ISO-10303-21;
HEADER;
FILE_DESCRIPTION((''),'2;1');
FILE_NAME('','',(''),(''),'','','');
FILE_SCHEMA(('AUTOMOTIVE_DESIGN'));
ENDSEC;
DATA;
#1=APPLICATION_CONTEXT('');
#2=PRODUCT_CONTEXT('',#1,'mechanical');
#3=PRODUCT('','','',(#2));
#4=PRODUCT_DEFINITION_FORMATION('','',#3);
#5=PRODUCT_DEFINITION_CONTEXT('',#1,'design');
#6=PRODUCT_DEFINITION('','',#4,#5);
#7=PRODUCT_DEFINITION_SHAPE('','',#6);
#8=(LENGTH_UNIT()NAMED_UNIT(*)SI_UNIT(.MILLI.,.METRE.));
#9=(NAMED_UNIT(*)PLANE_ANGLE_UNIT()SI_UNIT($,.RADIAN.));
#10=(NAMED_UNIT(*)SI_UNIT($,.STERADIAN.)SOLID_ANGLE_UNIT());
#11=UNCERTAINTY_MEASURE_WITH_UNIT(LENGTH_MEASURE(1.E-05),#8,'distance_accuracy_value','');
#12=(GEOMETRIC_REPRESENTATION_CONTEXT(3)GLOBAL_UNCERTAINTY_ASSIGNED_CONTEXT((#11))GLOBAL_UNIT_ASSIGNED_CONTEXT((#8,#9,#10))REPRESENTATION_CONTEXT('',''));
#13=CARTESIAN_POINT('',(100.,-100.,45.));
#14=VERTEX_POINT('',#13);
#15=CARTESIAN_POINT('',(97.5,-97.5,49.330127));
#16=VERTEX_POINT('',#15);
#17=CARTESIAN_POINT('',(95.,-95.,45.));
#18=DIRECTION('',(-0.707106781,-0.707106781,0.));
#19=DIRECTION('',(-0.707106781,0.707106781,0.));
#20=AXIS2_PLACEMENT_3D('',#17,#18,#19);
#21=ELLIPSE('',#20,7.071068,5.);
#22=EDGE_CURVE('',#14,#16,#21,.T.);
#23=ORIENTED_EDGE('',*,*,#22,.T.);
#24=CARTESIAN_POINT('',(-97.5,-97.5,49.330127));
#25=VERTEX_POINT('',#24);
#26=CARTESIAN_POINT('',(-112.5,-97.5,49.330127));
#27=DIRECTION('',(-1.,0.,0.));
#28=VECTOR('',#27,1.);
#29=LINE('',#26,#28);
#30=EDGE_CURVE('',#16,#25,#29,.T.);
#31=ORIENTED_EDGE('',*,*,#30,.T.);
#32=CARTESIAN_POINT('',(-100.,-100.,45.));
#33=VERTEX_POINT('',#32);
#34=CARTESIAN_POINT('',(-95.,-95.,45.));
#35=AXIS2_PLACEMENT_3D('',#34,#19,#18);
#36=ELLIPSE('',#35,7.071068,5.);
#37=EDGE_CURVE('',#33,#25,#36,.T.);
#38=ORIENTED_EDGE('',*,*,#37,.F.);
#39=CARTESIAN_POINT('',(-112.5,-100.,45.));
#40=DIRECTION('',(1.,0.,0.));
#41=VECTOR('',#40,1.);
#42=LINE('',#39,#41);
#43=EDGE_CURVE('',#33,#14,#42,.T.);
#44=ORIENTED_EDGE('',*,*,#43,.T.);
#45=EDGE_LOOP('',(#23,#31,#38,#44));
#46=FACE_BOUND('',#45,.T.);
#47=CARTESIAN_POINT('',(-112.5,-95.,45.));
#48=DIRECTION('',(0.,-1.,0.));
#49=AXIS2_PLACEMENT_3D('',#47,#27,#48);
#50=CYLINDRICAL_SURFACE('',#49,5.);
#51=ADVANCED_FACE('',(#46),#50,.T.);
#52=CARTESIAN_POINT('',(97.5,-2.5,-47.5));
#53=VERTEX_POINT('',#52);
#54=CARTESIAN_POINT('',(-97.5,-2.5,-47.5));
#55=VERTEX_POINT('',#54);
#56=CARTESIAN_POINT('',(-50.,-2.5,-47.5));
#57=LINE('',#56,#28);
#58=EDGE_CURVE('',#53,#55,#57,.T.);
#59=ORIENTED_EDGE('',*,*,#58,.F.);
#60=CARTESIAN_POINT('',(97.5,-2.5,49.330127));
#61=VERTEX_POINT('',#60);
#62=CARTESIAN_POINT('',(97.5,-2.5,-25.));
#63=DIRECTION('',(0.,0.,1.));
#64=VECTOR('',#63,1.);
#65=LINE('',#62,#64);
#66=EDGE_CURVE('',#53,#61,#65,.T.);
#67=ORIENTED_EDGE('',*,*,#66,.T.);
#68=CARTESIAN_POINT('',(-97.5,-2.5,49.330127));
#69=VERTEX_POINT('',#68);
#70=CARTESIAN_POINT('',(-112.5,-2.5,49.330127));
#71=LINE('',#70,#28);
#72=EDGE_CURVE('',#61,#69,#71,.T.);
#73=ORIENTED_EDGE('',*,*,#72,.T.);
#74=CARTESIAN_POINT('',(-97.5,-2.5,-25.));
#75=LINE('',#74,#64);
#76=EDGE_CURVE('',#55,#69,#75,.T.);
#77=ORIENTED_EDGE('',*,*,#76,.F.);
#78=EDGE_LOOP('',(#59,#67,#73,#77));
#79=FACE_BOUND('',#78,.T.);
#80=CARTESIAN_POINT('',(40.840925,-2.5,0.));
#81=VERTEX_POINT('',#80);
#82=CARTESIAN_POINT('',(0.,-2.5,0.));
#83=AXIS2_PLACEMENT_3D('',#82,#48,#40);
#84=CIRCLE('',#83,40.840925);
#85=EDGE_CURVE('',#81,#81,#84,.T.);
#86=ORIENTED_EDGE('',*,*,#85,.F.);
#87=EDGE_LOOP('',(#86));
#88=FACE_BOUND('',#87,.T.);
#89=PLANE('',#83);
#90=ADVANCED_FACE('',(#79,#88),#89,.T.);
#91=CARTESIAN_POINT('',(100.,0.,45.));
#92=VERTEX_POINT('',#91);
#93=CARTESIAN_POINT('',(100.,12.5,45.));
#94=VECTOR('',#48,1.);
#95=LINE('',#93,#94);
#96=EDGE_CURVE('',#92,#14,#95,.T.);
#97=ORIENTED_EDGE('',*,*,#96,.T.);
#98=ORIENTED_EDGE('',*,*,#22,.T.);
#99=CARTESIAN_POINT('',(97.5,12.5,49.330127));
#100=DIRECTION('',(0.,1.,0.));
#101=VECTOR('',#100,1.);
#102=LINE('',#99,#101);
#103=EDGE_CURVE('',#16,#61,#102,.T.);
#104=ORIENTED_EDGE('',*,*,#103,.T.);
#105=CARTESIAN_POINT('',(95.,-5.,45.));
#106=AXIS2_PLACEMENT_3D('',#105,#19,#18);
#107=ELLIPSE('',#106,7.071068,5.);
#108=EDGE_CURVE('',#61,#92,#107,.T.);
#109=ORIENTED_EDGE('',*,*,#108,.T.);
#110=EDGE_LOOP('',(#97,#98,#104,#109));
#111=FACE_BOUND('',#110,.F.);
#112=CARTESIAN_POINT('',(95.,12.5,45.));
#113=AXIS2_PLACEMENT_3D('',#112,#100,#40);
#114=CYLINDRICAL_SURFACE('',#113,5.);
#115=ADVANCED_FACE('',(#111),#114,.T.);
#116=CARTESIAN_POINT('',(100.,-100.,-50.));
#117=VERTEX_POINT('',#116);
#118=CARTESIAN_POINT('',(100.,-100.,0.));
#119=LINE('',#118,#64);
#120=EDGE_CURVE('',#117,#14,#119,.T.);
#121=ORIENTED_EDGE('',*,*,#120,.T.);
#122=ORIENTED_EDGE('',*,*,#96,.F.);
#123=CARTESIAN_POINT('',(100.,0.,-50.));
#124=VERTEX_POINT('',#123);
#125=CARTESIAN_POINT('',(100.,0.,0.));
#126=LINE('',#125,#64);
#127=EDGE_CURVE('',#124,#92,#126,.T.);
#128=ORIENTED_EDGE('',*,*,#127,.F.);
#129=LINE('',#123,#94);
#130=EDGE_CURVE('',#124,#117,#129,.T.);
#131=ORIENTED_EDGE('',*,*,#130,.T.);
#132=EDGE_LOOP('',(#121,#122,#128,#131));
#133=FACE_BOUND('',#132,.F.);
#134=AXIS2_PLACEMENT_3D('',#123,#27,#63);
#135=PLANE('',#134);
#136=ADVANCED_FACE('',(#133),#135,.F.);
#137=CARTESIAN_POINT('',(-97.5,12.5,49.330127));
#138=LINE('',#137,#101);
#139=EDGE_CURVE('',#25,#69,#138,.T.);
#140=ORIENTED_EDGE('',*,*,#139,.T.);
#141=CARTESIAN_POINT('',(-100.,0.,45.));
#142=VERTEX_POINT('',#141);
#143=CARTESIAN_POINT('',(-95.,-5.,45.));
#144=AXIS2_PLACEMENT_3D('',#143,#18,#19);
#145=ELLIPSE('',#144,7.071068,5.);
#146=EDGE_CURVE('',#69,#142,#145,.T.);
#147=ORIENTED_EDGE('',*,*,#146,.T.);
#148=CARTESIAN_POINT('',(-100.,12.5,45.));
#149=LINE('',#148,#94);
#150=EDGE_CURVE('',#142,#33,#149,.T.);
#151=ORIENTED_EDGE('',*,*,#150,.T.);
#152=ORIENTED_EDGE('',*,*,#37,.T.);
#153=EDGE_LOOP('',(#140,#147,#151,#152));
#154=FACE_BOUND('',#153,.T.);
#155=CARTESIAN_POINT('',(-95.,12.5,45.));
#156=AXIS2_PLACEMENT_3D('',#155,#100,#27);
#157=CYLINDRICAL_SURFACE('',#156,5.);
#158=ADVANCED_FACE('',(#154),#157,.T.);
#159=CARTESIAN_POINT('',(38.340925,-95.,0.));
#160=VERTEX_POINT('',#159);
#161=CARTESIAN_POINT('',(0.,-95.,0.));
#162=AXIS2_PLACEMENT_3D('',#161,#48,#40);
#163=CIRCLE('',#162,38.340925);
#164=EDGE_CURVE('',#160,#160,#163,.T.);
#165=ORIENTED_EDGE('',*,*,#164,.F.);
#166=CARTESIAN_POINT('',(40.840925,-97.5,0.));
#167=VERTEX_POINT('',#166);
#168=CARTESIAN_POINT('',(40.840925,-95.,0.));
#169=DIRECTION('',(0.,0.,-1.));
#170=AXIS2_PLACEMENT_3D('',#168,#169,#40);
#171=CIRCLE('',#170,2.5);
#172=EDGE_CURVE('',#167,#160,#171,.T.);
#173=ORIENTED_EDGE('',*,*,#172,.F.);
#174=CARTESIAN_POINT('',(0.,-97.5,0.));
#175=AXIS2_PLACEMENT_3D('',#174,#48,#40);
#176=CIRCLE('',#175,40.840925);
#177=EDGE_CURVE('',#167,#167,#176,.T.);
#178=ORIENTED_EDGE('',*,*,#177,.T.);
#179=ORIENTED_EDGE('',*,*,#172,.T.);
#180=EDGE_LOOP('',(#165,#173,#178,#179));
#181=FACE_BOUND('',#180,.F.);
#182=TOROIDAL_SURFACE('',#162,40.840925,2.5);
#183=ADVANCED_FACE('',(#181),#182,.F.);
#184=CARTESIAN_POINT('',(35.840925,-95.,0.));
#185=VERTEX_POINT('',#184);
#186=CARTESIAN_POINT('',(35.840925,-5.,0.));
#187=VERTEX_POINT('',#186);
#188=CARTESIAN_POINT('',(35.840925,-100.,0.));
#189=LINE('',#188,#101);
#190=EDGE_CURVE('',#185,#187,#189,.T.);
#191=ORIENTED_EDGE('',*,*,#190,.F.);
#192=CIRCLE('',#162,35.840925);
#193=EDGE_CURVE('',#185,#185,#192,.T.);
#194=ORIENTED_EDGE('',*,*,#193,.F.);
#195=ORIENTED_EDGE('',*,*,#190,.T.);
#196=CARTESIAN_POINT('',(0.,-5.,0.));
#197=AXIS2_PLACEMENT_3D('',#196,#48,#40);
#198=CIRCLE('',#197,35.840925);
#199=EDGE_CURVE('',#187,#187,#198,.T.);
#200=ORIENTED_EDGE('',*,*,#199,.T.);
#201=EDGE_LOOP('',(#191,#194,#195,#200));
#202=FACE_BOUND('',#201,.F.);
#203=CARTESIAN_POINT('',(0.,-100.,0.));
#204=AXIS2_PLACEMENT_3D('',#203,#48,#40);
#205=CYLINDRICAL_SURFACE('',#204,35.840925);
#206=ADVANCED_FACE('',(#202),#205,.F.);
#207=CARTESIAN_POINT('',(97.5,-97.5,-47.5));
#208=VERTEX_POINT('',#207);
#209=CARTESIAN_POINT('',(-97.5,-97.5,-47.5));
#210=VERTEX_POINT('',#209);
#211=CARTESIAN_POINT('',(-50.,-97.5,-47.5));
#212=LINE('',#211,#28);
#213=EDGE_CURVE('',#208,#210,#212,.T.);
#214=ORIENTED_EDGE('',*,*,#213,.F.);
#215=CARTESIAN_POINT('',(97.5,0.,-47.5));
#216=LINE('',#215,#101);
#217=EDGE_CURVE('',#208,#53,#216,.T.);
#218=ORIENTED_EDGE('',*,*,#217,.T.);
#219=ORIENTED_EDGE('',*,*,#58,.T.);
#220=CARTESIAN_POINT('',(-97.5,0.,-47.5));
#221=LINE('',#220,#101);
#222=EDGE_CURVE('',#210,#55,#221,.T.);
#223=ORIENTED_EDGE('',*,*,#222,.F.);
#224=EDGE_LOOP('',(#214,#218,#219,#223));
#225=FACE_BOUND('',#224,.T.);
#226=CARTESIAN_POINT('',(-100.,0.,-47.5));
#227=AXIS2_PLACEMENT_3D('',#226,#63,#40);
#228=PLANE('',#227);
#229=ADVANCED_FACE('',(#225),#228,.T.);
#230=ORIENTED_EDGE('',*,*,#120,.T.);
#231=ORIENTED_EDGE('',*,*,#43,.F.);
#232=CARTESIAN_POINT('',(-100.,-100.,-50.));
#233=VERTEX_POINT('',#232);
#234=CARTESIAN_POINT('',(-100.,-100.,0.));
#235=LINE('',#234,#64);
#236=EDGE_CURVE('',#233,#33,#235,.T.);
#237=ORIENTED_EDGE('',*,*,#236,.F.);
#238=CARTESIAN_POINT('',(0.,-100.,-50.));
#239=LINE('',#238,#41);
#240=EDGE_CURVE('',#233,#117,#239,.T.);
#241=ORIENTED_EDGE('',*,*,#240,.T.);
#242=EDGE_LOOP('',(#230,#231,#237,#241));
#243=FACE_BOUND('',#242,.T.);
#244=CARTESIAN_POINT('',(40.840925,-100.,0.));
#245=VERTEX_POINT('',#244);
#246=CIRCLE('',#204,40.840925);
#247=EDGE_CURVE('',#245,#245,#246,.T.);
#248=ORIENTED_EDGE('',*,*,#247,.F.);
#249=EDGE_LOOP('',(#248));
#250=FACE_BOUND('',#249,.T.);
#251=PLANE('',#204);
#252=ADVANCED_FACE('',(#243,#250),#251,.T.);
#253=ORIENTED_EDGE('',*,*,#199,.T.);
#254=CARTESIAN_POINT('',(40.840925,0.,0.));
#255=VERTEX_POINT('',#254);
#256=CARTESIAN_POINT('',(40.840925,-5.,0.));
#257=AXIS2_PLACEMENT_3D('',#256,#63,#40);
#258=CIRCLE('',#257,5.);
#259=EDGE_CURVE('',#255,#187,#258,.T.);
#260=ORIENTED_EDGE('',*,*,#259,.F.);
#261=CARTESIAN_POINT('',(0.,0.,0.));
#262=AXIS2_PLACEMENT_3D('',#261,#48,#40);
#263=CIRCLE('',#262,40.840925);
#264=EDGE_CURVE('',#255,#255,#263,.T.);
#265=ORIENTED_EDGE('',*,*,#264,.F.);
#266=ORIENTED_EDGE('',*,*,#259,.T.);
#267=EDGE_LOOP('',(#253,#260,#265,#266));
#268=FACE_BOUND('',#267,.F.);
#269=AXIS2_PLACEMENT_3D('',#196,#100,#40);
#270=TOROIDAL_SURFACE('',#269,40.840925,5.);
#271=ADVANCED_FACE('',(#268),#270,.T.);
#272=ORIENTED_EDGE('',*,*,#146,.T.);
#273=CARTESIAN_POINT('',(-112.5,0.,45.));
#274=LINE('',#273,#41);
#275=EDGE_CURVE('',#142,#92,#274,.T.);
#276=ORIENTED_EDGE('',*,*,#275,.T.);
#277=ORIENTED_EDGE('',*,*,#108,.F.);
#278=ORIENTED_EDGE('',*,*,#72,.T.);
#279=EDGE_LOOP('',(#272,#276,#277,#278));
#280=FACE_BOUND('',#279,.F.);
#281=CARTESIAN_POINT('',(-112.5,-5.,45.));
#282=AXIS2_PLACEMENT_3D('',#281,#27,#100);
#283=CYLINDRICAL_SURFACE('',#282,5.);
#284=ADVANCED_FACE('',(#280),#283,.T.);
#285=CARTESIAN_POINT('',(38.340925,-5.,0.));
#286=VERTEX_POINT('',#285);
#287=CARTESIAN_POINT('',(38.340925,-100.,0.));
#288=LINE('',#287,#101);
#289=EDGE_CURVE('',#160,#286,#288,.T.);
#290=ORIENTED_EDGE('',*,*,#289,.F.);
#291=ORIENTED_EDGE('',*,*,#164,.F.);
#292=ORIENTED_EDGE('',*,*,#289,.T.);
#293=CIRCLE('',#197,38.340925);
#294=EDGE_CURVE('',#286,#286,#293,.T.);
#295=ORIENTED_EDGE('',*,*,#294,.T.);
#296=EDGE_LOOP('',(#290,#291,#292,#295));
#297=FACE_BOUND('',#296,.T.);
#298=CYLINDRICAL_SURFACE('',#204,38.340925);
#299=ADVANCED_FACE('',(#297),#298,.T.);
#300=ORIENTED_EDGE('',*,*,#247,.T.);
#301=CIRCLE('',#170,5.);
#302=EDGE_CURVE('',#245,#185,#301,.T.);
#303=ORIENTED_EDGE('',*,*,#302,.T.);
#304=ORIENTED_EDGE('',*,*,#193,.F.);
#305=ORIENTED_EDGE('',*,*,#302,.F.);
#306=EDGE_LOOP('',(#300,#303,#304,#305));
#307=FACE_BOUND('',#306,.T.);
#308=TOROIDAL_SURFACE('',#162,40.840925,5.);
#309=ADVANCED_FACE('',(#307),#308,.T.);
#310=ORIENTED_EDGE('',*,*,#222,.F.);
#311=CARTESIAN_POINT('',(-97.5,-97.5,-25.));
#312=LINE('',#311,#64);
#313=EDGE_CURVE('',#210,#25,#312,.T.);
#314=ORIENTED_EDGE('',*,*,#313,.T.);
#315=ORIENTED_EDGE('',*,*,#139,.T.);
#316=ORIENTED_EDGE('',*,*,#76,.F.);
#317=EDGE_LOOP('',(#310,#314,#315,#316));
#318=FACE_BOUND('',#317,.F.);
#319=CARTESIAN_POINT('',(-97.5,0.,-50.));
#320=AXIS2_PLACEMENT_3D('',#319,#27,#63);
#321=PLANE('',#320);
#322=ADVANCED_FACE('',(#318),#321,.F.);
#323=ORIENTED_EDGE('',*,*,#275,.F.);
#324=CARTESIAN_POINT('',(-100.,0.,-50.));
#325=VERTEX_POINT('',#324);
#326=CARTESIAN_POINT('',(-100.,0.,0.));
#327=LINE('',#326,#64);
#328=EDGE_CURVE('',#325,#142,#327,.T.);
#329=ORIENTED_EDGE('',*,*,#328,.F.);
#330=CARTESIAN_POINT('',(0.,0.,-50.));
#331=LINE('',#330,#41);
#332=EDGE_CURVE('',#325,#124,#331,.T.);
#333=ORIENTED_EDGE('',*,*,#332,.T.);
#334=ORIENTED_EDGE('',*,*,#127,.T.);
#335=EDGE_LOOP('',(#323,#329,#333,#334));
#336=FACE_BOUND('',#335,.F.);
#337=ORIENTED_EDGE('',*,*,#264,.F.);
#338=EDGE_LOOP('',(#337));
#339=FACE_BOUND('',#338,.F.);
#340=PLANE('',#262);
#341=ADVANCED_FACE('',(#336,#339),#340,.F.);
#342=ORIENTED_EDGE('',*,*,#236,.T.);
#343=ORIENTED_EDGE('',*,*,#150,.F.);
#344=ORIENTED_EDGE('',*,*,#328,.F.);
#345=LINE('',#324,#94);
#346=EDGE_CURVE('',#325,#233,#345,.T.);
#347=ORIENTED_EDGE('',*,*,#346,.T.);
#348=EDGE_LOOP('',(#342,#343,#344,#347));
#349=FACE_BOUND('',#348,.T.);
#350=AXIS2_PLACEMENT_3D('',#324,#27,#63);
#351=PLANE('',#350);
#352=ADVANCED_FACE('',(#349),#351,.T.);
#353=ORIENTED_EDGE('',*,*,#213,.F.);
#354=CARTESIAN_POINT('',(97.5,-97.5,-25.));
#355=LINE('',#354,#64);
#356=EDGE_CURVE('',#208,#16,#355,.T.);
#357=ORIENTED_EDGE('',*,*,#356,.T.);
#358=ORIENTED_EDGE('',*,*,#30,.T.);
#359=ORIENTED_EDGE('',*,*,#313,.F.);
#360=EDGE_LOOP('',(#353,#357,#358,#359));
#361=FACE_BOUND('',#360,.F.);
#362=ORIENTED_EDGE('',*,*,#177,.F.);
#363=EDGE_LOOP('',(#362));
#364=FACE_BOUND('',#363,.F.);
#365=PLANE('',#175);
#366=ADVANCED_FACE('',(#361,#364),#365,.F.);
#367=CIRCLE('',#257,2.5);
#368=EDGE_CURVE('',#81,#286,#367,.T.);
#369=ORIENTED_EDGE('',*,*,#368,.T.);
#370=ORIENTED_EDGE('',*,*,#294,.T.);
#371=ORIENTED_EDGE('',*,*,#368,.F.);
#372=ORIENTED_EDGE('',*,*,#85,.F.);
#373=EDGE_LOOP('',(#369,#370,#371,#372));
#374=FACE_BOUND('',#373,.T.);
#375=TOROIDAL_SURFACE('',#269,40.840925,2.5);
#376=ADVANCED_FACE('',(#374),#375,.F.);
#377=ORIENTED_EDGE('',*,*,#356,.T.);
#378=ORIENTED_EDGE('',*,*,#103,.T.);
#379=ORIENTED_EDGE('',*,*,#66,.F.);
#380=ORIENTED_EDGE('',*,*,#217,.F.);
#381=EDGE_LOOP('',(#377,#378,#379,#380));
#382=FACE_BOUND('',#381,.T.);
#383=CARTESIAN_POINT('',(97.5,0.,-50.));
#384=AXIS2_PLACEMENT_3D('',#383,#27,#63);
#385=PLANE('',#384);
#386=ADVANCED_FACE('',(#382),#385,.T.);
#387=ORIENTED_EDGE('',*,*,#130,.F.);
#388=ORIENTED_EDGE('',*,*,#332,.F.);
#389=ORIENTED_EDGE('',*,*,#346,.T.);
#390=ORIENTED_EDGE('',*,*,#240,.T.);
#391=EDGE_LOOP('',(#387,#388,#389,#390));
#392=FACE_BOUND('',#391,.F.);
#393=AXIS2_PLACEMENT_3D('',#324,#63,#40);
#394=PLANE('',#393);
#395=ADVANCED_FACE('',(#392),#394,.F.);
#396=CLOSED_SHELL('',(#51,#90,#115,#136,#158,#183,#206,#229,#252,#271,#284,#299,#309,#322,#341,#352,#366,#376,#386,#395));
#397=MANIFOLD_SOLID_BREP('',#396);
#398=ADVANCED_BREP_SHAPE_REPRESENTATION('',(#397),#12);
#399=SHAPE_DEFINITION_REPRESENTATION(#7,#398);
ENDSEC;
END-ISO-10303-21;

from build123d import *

# Parameters (mm, degrees)
F0_W        = 200
F0_H        = 100
F1_DEPTH    = 100
F2_R        = 35.8409251955
F3_DEPTH    = 100.001
F4_R        = 5
F5_T        = -2.5
F6_T1_DEPTH = 225
F6_T3_DEPTH = 125


# Not quite as in the source:
# - a fillet or chamfer that OpenCascade refuses, or shapes differently, is made with other operations: its cross-section is extruded or revolved along the edge and cut away or added


with BuildPart() as f1:
    # F0 (on Front) → F1 (new body)
    with BuildSketch(Plane.XZ):
        Rectangle(F0_W, F0_H)
    extrude(amount=F1_DEPTH)

    # F2 (on face) → F3 (cut, through all)
    with BuildSketch(Plane.XZ.offset(100)):
        Circle(F2_R)
    extrude(amount=-F3_DEPTH, mode=Mode.SUBTRACT)

    # F4
    f4_edges = [f1.edges().sort_by_distance(p)[0] for p in [
        (-35.840925, -100, 0),
        (-35.840925, 0, 0),
    ]]
    fillet(f4_edges, radius=F4_R)

    # F5
    f5_openings = [f1.faces().sort_by_distance(p)[0] for p in [
        (0, -50, 50),
    ]]
    offset(amount=F5_T, openings=f5_openings)

    # F6: fillet of radius 5 on 4 edges, made by hand

    # F6_s2 → F6_t1 (cut)
    with BuildSketch(Plane.YZ.offset(-112.5)):
        with BuildLine():
            ThreePointArc((-100, 45), (-98.5355339059, 48.5355339059), (-95, 50))
            Line((-95, 50), (-100, 50))
            Line((-100, 50), (-100, 45))
        make_face()
        with BuildLine():
            ThreePointArc((0, 45), (-1.4644660941, 48.5355339059), (-5, 50))
            Line((-5, 50), (0, 50))
            Line((0, 50), (0, 45))
        make_face()
    extrude(amount=F6_T1_DEPTH, mode=Mode.SUBTRACT)

    # F6_s4 → F6_t3 (cut)
    with BuildSketch(Plane.XZ.offset(-12.5)):
        with BuildLine():
            ThreePointArc((-100, 45), (-98.5355339059, 48.5355339059), (-95, 50))
            Line((-95, 50), (-100, 50))
            Line((-100, 50), (-100, 45))
        make_face()
        with BuildLine():
            ThreePointArc((100, 45), (98.5355339059, 48.5355339059), (95, 50))
            Line((95, 50), (100, 50))
            Line((100, 50), (100, 45))
        make_face()
    extrude(amount=F6_T3_DEPTH, mode=Mode.SUBTRACT)


solid = f1.part
